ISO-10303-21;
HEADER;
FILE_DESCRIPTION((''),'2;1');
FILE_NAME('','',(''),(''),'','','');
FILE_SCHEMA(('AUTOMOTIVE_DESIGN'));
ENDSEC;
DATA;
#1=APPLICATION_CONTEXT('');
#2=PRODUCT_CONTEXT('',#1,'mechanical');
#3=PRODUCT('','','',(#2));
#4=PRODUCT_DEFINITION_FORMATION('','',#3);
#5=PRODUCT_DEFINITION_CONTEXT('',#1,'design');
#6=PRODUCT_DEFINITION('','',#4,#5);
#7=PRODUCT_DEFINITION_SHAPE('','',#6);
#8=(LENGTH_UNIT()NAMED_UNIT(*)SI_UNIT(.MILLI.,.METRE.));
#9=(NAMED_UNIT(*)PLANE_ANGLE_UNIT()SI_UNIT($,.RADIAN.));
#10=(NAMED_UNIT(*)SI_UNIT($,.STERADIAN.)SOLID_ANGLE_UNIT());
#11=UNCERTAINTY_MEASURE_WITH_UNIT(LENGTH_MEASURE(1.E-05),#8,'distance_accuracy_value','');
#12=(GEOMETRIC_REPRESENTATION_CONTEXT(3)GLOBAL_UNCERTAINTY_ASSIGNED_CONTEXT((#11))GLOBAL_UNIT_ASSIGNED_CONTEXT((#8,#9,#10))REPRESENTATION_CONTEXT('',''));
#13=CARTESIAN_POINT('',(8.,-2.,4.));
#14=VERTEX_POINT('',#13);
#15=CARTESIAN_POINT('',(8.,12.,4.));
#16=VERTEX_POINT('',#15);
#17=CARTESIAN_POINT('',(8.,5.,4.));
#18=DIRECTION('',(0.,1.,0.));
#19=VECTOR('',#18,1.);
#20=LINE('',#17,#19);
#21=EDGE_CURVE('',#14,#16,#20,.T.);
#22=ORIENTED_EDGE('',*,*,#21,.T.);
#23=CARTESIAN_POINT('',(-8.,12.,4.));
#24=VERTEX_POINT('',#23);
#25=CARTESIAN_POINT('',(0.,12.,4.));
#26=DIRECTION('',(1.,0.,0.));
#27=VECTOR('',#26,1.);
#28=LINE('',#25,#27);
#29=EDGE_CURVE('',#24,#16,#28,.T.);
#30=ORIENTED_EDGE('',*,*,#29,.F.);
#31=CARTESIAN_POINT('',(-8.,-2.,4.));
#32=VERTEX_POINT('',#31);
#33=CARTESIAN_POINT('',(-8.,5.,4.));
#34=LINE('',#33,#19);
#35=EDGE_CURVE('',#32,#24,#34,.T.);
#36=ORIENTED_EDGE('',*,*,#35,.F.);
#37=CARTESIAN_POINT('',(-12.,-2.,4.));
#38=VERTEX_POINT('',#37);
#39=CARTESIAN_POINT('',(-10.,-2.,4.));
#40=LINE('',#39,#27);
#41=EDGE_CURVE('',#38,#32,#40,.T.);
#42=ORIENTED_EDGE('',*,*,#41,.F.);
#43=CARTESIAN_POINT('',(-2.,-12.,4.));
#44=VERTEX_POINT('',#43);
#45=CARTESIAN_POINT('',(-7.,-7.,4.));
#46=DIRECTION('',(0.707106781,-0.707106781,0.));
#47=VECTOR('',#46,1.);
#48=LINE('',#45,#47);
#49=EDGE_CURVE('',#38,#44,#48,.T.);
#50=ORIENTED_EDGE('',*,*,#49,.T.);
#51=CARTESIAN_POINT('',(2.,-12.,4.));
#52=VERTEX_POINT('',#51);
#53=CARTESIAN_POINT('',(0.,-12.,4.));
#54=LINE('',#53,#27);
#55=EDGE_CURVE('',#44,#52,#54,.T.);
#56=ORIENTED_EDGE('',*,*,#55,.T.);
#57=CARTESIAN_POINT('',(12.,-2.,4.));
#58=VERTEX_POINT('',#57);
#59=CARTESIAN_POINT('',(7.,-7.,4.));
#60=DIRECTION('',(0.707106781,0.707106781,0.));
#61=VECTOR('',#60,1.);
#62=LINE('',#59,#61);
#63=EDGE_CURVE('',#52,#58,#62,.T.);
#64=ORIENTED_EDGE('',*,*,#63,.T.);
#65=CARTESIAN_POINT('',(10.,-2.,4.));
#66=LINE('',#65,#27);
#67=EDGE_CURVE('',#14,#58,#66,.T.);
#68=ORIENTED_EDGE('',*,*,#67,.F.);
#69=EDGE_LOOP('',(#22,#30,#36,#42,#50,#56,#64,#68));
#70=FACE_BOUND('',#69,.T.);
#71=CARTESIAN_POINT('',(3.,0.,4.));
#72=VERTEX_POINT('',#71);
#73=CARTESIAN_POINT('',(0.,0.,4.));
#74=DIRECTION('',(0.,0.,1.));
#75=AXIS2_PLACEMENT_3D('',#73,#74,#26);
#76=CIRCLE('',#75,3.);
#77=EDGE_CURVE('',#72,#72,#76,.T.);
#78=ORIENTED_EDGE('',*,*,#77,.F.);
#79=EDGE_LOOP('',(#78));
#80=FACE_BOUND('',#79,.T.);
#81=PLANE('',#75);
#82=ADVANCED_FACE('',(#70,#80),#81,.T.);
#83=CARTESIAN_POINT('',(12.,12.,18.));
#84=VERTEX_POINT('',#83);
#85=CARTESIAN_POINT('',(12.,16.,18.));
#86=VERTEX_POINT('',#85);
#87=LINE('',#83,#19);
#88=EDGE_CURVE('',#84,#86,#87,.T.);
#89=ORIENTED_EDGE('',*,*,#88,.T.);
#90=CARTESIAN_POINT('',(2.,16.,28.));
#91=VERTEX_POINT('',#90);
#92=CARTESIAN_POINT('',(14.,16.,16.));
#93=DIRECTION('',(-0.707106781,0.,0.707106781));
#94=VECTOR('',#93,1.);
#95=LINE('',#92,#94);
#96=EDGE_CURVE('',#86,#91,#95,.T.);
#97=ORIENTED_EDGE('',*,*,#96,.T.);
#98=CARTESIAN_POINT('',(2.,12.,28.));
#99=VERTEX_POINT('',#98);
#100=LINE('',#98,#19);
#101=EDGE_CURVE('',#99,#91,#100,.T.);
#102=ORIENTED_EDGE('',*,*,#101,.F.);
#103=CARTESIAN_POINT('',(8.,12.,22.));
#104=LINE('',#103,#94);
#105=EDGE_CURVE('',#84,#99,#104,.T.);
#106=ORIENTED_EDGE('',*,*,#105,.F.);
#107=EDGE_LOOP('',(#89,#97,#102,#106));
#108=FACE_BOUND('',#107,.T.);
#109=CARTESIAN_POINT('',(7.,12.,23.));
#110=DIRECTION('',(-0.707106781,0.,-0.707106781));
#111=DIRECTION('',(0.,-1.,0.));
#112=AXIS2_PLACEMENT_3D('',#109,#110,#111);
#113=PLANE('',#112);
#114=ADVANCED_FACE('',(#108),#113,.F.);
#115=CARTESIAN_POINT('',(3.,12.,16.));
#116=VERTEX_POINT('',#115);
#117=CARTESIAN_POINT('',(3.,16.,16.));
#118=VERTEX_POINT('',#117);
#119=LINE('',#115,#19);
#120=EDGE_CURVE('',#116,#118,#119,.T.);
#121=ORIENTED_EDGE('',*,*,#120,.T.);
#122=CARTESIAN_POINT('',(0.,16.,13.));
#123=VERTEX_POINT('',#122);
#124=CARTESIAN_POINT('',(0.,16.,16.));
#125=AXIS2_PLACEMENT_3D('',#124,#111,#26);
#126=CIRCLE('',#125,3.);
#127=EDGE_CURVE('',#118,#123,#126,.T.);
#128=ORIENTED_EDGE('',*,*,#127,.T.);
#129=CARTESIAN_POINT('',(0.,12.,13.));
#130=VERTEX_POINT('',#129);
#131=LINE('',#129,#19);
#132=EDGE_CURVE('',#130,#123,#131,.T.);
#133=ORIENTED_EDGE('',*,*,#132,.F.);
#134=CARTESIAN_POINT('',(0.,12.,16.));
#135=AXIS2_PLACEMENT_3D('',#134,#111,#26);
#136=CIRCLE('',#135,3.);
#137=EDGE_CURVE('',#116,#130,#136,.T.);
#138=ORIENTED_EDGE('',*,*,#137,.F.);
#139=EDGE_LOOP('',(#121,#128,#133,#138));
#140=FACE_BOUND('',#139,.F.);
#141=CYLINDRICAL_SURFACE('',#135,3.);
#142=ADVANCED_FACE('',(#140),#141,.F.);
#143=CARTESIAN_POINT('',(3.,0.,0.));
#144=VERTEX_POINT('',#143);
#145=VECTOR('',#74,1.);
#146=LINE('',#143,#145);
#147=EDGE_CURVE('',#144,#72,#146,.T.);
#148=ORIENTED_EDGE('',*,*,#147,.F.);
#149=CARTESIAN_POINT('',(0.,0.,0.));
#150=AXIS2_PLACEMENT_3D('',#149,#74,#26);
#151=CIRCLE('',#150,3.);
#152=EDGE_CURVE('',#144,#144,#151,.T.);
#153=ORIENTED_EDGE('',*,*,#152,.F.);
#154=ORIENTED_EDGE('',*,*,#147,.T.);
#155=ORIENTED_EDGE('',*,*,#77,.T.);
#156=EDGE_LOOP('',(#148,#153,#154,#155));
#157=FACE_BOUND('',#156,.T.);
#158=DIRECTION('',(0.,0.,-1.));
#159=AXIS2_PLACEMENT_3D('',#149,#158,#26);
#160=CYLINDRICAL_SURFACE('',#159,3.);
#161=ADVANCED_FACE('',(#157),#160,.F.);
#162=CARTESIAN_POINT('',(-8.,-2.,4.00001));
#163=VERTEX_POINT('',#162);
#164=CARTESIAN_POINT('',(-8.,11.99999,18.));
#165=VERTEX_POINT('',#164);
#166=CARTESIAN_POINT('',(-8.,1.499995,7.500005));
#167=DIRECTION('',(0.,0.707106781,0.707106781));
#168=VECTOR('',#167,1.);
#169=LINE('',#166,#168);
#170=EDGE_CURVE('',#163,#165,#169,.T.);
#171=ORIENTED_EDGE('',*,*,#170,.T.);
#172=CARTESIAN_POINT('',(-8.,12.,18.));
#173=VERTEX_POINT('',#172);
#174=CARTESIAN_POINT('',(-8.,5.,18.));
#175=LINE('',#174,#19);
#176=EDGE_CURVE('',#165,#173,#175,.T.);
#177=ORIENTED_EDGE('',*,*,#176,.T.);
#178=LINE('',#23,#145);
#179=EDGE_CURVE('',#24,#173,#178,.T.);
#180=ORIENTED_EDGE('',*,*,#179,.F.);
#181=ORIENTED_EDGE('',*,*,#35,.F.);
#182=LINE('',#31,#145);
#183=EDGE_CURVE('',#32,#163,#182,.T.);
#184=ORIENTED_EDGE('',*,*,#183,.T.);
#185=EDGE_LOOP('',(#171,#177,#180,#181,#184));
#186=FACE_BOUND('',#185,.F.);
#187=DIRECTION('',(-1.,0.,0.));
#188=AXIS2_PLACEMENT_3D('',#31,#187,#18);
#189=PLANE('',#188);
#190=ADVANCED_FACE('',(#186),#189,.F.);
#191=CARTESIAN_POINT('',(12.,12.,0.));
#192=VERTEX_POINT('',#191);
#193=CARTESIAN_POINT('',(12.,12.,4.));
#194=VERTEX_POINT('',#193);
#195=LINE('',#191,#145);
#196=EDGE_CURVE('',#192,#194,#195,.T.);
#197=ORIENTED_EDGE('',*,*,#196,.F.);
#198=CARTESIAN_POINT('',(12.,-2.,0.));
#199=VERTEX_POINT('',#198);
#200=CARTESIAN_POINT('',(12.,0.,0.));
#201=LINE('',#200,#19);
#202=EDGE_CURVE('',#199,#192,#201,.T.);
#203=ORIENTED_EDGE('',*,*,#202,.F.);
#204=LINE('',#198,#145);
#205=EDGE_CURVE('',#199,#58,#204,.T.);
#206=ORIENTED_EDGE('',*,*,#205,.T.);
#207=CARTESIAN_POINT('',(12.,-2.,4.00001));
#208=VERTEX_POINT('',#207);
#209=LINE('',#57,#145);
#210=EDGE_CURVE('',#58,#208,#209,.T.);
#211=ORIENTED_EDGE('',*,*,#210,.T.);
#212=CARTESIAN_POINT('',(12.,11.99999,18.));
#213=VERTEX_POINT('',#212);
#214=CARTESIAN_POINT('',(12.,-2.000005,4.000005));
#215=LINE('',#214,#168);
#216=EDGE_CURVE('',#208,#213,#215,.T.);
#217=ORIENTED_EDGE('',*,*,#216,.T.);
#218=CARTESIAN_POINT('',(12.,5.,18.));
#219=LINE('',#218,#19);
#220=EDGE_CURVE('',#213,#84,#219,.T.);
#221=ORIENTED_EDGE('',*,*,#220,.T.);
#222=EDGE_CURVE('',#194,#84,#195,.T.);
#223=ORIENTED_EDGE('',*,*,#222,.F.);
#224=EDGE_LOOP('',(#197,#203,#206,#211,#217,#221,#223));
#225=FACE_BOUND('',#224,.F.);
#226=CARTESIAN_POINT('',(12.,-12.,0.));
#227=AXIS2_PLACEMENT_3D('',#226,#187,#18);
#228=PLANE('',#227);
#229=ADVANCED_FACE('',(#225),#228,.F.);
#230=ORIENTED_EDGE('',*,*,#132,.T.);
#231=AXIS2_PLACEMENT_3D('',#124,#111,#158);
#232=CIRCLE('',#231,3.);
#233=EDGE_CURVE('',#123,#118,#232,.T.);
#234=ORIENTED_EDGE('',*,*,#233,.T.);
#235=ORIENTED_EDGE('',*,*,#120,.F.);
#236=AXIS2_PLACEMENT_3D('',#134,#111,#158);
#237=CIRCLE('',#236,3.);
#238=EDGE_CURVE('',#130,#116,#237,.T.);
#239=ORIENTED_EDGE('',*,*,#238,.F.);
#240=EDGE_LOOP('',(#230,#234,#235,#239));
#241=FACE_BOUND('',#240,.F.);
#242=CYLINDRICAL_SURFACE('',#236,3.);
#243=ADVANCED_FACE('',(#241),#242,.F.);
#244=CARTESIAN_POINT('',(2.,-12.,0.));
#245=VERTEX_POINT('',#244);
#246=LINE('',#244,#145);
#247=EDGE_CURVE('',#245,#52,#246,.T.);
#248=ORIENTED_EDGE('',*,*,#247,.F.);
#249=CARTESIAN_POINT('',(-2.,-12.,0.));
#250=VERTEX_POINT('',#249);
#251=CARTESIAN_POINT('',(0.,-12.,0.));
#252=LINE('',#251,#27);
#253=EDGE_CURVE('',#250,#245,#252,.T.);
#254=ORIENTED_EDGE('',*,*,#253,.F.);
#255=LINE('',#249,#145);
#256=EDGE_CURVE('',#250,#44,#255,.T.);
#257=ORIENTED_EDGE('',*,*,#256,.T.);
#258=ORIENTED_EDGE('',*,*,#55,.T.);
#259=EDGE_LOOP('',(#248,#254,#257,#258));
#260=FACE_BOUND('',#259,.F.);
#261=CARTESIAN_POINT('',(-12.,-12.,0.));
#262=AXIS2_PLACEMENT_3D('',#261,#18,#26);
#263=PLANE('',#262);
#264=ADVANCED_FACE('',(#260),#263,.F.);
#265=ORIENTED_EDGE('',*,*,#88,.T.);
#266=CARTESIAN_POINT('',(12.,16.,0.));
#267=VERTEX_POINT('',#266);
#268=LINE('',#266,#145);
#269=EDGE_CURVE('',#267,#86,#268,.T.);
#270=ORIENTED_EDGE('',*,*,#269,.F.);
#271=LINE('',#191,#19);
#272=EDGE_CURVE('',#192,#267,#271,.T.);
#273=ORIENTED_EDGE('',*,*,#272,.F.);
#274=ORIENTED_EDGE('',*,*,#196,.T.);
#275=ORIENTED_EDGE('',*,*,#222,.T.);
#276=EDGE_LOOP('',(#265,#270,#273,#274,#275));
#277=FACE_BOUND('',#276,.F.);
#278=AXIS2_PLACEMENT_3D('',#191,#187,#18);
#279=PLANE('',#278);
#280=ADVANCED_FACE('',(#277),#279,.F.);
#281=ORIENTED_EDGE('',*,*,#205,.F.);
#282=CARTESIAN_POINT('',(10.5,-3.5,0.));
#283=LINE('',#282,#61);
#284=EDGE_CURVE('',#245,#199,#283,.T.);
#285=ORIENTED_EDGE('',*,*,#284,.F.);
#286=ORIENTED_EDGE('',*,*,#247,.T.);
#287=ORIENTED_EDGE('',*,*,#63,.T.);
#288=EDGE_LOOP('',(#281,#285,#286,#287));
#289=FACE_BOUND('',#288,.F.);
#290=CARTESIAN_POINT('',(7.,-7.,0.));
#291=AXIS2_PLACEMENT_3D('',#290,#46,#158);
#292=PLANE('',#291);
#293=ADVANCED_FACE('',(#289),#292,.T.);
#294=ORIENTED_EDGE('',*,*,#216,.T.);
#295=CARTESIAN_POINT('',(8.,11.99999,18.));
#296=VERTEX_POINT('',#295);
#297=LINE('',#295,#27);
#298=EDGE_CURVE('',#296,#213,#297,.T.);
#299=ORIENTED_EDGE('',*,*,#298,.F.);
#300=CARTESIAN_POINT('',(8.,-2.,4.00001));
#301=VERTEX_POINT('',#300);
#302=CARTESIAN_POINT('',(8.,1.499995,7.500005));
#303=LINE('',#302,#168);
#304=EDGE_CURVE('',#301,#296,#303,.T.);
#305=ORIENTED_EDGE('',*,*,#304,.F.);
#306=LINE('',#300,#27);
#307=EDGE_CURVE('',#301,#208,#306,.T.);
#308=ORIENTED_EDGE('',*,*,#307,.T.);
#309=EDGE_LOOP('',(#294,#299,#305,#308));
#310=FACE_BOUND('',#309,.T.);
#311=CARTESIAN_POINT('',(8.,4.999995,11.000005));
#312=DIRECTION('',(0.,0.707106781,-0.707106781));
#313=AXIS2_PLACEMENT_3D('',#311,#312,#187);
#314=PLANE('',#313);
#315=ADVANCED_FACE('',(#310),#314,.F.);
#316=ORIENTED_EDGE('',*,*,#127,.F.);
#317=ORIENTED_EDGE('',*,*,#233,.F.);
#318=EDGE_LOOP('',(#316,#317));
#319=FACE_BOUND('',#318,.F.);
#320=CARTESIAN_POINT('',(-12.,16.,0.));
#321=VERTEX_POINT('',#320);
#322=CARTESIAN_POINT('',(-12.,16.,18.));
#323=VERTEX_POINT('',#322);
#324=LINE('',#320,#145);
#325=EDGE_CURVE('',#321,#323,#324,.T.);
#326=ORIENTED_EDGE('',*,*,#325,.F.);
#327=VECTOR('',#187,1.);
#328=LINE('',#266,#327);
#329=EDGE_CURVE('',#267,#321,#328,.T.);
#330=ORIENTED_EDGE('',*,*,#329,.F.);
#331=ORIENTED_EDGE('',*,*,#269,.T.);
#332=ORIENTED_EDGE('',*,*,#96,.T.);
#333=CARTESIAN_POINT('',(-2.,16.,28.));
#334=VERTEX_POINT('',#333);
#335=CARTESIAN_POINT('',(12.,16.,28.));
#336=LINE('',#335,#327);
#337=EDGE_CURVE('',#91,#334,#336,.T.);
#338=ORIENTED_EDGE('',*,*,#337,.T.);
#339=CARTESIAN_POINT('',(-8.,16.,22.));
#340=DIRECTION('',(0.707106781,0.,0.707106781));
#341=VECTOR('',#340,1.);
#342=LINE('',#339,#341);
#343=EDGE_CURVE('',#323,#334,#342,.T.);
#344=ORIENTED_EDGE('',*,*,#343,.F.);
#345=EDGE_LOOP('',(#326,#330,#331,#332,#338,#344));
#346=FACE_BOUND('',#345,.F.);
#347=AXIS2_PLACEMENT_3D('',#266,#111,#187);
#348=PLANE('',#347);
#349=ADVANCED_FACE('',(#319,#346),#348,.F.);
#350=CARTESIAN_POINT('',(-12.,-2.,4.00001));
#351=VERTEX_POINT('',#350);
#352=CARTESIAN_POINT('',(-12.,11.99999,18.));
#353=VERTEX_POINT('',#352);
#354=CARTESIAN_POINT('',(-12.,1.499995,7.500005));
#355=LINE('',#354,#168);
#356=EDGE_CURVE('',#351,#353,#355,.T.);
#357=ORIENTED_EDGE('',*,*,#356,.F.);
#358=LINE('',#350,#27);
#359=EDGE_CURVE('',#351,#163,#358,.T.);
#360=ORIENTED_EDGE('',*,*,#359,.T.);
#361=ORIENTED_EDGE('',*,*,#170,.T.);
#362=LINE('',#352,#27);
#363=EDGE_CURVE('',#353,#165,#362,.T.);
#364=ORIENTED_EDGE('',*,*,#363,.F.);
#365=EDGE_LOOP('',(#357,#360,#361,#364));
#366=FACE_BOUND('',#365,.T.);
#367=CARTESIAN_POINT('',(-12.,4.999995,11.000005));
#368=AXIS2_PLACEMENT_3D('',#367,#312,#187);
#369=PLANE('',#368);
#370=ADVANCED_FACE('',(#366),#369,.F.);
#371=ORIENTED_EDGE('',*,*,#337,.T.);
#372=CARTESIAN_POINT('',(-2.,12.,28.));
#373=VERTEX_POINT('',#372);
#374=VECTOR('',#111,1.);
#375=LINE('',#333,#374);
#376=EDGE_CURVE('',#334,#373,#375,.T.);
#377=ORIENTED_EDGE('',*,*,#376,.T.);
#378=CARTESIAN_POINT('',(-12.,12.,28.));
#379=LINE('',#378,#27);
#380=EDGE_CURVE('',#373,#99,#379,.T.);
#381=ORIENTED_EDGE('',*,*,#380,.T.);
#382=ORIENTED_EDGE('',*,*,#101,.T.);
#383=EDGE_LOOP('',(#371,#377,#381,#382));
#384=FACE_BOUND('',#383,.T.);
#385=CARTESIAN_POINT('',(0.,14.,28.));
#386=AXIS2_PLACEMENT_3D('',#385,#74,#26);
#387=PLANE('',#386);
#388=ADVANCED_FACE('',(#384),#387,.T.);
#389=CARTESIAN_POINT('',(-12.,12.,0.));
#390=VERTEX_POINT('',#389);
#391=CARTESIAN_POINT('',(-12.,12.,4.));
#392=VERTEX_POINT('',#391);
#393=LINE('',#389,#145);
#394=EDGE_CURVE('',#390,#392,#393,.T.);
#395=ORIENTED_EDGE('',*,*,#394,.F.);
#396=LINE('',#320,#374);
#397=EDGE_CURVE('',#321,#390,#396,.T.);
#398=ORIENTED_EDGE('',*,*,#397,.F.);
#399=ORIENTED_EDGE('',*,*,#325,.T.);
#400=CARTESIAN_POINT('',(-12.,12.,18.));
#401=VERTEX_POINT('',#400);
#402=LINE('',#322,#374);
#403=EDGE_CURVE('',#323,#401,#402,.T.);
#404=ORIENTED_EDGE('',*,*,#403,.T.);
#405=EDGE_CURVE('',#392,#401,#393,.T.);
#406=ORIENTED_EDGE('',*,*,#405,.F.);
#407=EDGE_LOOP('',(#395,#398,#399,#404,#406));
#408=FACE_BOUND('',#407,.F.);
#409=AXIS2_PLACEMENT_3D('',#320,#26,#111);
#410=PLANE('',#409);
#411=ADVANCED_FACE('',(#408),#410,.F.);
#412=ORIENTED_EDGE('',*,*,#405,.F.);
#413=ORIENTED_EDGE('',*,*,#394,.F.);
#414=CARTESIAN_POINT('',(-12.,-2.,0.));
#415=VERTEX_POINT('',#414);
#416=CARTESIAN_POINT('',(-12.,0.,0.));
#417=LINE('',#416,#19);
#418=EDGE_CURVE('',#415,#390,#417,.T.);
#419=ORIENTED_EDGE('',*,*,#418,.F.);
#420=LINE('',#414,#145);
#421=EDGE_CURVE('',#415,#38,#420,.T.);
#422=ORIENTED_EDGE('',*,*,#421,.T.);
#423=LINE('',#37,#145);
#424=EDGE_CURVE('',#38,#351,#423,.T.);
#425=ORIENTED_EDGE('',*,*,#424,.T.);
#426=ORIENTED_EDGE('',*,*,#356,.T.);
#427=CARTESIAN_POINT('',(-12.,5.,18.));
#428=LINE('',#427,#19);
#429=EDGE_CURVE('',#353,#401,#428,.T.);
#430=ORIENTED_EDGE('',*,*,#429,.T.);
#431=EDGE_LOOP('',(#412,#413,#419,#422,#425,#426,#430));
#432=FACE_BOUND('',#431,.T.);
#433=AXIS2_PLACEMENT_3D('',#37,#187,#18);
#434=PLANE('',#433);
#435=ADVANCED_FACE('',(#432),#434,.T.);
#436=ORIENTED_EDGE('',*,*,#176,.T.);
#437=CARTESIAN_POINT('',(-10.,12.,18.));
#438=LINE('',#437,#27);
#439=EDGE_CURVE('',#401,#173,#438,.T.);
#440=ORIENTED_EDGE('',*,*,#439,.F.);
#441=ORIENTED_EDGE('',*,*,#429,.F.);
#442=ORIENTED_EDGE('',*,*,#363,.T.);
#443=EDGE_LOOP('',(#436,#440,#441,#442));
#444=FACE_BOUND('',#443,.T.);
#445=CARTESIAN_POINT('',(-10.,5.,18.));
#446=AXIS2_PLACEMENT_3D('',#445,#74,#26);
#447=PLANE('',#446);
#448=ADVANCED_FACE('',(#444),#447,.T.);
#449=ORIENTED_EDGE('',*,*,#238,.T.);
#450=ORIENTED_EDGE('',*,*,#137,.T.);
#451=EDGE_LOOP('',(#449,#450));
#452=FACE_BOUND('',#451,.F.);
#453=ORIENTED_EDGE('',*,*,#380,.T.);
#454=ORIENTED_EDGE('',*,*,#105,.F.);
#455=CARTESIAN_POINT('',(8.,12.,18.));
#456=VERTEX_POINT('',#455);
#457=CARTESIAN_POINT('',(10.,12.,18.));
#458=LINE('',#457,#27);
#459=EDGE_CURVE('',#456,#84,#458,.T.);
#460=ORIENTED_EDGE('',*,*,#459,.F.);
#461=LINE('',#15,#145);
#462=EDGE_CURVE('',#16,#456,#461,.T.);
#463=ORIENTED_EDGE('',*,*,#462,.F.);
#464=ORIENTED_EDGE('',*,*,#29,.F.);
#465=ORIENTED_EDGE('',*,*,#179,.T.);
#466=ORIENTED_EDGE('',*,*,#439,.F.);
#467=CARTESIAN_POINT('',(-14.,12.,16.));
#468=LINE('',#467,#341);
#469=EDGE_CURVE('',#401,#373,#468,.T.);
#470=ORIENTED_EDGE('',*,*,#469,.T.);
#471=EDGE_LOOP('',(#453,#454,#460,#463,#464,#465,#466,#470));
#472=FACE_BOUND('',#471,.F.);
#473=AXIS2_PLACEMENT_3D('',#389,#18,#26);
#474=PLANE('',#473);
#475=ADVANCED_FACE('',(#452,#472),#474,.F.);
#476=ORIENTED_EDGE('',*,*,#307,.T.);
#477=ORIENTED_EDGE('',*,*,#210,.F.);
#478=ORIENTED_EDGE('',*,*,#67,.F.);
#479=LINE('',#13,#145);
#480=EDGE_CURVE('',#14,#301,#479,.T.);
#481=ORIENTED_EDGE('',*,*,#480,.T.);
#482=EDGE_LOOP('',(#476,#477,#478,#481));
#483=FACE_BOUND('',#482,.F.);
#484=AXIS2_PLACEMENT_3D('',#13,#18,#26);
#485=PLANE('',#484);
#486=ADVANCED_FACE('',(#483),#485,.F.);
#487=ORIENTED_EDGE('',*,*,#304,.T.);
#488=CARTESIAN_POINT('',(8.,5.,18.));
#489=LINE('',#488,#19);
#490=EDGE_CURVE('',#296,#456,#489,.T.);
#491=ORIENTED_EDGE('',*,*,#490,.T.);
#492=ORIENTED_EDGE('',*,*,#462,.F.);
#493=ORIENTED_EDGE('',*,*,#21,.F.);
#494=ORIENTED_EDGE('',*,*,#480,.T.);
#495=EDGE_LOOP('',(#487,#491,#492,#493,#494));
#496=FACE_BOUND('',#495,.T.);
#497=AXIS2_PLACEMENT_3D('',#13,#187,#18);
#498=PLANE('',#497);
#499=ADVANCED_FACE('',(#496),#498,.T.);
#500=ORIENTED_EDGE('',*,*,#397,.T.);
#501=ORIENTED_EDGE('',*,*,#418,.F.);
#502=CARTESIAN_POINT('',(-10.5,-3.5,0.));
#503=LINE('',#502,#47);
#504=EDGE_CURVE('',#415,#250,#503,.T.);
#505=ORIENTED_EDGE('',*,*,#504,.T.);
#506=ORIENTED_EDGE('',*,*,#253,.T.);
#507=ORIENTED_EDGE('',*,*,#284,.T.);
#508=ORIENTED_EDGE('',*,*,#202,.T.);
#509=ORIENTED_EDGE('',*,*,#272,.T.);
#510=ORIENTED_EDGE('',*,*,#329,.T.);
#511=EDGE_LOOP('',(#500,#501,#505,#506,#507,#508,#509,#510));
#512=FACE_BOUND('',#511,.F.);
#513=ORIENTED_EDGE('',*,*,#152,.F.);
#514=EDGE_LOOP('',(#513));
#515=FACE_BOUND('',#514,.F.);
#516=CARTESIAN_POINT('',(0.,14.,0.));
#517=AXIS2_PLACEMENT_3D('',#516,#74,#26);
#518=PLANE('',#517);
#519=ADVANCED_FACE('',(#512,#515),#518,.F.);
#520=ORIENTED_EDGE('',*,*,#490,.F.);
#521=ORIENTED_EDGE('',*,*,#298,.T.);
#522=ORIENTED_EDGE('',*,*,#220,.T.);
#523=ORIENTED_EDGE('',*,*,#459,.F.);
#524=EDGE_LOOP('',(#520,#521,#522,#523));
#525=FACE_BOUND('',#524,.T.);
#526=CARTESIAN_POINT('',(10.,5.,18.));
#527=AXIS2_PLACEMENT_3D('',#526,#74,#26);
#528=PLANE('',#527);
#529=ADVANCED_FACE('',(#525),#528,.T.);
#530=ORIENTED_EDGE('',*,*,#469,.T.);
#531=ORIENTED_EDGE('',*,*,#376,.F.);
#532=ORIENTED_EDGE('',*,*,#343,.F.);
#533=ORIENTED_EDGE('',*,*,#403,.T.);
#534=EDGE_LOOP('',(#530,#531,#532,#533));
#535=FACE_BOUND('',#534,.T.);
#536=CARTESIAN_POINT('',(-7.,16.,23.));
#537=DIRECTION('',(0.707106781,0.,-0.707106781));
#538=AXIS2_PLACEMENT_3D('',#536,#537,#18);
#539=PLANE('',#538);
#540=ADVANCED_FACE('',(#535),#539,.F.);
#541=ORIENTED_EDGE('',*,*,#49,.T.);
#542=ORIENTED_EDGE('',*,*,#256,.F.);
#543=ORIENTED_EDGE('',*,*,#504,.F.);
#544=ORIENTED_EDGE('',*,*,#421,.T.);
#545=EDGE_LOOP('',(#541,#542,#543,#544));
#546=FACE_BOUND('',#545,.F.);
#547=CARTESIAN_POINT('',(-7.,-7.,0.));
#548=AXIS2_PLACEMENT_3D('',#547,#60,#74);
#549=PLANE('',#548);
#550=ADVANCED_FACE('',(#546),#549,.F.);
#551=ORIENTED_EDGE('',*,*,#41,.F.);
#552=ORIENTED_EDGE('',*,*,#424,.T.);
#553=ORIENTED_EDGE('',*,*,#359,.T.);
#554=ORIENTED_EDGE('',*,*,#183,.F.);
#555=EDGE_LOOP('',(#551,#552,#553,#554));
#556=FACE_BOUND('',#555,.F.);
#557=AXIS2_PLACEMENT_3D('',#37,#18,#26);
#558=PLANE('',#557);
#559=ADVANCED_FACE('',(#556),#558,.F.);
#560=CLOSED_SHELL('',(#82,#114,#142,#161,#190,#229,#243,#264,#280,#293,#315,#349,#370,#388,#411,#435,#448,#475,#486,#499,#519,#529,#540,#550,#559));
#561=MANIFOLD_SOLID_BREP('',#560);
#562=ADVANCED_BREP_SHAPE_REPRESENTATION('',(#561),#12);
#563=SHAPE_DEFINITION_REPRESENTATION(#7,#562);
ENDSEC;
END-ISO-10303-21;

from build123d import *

# Parameters (mm, degrees)
F0_W     = 24
F0_H     = 24
F0_R     = 3
F1_DEPTH = 4
F3_DEPTH = 28
F5_DEPTH = 25
F6_SIZE  = 10
F7_W     = 4
F7_H     = 14
F8_DEPTH = 14
F9_SIZE  = 13.99999


# Not quite as in the source:
# - a fillet or chamfer is up to 0.001 mm smaller than in the source, because OpenCascade refuses the exact size


with BuildPart() as f1:
    # F0 (on Top) → F1 (new body)
    with BuildSketch(Plane.XY):
        Rectangle(F0_W, F0_H)
        Circle(F0_R, mode=Mode.SUBTRACT)
    extrude(amount=F1_DEPTH)

    # F2 (on Top) → F3 (join)
    with BuildSketch(Plane.XY):
        Polygon((-12.0000001043, 12), (0, 12), (11.9999998957, 12), (11.9999998957, 16), (-12.0000001043, 16), align=None)
    extrude(amount=F3_DEPTH)

    # F4 (on face) → F5 (cut)
    with BuildSketch(Plane.XZ.offset(-12)):
        with BuildLine():
            ThreePointArc((0, 13), (2.1213203436, 13.8786796564), (3, 16))
            ThreePointArc((3, 16), (-2.1213203436, 18.1213203436), (0, 13))
        make_face()
    extrude(amount=-F5_DEPTH, mode=Mode.SUBTRACT)

    # F6
    f6_edges = [f1.edges().sort_by_distance(p)[0] for p in [
        (-12, -12, 2),
        (12, -12, 2),
        (-12, 14, 28),
        (12, 14, 28),
    ]]
    chamfer(f6_edges, length=F6_SIZE)

    # F7 (on face) → F8 (join)
    with BuildSketch(Plane.XY.offset(4)):
        with Locations((-10, 5)):
            Rectangle(F7_W, F7_H)
        with Locations((10, 5)):
            Rectangle(F7_W, F7_H)
    extrude(amount=F8_DEPTH)

    # F9 (size 14 in the source; OpenCascade refuses exactly that, so slightly less here)
    f9_edges = [f1.edges().sort_by_distance(p)[0] for p in [
        (-10, -2, 18),
        (10, -2, 18),
    ]]
    chamfer(f9_edges, length=F9_SIZE)


solid = f1.part
